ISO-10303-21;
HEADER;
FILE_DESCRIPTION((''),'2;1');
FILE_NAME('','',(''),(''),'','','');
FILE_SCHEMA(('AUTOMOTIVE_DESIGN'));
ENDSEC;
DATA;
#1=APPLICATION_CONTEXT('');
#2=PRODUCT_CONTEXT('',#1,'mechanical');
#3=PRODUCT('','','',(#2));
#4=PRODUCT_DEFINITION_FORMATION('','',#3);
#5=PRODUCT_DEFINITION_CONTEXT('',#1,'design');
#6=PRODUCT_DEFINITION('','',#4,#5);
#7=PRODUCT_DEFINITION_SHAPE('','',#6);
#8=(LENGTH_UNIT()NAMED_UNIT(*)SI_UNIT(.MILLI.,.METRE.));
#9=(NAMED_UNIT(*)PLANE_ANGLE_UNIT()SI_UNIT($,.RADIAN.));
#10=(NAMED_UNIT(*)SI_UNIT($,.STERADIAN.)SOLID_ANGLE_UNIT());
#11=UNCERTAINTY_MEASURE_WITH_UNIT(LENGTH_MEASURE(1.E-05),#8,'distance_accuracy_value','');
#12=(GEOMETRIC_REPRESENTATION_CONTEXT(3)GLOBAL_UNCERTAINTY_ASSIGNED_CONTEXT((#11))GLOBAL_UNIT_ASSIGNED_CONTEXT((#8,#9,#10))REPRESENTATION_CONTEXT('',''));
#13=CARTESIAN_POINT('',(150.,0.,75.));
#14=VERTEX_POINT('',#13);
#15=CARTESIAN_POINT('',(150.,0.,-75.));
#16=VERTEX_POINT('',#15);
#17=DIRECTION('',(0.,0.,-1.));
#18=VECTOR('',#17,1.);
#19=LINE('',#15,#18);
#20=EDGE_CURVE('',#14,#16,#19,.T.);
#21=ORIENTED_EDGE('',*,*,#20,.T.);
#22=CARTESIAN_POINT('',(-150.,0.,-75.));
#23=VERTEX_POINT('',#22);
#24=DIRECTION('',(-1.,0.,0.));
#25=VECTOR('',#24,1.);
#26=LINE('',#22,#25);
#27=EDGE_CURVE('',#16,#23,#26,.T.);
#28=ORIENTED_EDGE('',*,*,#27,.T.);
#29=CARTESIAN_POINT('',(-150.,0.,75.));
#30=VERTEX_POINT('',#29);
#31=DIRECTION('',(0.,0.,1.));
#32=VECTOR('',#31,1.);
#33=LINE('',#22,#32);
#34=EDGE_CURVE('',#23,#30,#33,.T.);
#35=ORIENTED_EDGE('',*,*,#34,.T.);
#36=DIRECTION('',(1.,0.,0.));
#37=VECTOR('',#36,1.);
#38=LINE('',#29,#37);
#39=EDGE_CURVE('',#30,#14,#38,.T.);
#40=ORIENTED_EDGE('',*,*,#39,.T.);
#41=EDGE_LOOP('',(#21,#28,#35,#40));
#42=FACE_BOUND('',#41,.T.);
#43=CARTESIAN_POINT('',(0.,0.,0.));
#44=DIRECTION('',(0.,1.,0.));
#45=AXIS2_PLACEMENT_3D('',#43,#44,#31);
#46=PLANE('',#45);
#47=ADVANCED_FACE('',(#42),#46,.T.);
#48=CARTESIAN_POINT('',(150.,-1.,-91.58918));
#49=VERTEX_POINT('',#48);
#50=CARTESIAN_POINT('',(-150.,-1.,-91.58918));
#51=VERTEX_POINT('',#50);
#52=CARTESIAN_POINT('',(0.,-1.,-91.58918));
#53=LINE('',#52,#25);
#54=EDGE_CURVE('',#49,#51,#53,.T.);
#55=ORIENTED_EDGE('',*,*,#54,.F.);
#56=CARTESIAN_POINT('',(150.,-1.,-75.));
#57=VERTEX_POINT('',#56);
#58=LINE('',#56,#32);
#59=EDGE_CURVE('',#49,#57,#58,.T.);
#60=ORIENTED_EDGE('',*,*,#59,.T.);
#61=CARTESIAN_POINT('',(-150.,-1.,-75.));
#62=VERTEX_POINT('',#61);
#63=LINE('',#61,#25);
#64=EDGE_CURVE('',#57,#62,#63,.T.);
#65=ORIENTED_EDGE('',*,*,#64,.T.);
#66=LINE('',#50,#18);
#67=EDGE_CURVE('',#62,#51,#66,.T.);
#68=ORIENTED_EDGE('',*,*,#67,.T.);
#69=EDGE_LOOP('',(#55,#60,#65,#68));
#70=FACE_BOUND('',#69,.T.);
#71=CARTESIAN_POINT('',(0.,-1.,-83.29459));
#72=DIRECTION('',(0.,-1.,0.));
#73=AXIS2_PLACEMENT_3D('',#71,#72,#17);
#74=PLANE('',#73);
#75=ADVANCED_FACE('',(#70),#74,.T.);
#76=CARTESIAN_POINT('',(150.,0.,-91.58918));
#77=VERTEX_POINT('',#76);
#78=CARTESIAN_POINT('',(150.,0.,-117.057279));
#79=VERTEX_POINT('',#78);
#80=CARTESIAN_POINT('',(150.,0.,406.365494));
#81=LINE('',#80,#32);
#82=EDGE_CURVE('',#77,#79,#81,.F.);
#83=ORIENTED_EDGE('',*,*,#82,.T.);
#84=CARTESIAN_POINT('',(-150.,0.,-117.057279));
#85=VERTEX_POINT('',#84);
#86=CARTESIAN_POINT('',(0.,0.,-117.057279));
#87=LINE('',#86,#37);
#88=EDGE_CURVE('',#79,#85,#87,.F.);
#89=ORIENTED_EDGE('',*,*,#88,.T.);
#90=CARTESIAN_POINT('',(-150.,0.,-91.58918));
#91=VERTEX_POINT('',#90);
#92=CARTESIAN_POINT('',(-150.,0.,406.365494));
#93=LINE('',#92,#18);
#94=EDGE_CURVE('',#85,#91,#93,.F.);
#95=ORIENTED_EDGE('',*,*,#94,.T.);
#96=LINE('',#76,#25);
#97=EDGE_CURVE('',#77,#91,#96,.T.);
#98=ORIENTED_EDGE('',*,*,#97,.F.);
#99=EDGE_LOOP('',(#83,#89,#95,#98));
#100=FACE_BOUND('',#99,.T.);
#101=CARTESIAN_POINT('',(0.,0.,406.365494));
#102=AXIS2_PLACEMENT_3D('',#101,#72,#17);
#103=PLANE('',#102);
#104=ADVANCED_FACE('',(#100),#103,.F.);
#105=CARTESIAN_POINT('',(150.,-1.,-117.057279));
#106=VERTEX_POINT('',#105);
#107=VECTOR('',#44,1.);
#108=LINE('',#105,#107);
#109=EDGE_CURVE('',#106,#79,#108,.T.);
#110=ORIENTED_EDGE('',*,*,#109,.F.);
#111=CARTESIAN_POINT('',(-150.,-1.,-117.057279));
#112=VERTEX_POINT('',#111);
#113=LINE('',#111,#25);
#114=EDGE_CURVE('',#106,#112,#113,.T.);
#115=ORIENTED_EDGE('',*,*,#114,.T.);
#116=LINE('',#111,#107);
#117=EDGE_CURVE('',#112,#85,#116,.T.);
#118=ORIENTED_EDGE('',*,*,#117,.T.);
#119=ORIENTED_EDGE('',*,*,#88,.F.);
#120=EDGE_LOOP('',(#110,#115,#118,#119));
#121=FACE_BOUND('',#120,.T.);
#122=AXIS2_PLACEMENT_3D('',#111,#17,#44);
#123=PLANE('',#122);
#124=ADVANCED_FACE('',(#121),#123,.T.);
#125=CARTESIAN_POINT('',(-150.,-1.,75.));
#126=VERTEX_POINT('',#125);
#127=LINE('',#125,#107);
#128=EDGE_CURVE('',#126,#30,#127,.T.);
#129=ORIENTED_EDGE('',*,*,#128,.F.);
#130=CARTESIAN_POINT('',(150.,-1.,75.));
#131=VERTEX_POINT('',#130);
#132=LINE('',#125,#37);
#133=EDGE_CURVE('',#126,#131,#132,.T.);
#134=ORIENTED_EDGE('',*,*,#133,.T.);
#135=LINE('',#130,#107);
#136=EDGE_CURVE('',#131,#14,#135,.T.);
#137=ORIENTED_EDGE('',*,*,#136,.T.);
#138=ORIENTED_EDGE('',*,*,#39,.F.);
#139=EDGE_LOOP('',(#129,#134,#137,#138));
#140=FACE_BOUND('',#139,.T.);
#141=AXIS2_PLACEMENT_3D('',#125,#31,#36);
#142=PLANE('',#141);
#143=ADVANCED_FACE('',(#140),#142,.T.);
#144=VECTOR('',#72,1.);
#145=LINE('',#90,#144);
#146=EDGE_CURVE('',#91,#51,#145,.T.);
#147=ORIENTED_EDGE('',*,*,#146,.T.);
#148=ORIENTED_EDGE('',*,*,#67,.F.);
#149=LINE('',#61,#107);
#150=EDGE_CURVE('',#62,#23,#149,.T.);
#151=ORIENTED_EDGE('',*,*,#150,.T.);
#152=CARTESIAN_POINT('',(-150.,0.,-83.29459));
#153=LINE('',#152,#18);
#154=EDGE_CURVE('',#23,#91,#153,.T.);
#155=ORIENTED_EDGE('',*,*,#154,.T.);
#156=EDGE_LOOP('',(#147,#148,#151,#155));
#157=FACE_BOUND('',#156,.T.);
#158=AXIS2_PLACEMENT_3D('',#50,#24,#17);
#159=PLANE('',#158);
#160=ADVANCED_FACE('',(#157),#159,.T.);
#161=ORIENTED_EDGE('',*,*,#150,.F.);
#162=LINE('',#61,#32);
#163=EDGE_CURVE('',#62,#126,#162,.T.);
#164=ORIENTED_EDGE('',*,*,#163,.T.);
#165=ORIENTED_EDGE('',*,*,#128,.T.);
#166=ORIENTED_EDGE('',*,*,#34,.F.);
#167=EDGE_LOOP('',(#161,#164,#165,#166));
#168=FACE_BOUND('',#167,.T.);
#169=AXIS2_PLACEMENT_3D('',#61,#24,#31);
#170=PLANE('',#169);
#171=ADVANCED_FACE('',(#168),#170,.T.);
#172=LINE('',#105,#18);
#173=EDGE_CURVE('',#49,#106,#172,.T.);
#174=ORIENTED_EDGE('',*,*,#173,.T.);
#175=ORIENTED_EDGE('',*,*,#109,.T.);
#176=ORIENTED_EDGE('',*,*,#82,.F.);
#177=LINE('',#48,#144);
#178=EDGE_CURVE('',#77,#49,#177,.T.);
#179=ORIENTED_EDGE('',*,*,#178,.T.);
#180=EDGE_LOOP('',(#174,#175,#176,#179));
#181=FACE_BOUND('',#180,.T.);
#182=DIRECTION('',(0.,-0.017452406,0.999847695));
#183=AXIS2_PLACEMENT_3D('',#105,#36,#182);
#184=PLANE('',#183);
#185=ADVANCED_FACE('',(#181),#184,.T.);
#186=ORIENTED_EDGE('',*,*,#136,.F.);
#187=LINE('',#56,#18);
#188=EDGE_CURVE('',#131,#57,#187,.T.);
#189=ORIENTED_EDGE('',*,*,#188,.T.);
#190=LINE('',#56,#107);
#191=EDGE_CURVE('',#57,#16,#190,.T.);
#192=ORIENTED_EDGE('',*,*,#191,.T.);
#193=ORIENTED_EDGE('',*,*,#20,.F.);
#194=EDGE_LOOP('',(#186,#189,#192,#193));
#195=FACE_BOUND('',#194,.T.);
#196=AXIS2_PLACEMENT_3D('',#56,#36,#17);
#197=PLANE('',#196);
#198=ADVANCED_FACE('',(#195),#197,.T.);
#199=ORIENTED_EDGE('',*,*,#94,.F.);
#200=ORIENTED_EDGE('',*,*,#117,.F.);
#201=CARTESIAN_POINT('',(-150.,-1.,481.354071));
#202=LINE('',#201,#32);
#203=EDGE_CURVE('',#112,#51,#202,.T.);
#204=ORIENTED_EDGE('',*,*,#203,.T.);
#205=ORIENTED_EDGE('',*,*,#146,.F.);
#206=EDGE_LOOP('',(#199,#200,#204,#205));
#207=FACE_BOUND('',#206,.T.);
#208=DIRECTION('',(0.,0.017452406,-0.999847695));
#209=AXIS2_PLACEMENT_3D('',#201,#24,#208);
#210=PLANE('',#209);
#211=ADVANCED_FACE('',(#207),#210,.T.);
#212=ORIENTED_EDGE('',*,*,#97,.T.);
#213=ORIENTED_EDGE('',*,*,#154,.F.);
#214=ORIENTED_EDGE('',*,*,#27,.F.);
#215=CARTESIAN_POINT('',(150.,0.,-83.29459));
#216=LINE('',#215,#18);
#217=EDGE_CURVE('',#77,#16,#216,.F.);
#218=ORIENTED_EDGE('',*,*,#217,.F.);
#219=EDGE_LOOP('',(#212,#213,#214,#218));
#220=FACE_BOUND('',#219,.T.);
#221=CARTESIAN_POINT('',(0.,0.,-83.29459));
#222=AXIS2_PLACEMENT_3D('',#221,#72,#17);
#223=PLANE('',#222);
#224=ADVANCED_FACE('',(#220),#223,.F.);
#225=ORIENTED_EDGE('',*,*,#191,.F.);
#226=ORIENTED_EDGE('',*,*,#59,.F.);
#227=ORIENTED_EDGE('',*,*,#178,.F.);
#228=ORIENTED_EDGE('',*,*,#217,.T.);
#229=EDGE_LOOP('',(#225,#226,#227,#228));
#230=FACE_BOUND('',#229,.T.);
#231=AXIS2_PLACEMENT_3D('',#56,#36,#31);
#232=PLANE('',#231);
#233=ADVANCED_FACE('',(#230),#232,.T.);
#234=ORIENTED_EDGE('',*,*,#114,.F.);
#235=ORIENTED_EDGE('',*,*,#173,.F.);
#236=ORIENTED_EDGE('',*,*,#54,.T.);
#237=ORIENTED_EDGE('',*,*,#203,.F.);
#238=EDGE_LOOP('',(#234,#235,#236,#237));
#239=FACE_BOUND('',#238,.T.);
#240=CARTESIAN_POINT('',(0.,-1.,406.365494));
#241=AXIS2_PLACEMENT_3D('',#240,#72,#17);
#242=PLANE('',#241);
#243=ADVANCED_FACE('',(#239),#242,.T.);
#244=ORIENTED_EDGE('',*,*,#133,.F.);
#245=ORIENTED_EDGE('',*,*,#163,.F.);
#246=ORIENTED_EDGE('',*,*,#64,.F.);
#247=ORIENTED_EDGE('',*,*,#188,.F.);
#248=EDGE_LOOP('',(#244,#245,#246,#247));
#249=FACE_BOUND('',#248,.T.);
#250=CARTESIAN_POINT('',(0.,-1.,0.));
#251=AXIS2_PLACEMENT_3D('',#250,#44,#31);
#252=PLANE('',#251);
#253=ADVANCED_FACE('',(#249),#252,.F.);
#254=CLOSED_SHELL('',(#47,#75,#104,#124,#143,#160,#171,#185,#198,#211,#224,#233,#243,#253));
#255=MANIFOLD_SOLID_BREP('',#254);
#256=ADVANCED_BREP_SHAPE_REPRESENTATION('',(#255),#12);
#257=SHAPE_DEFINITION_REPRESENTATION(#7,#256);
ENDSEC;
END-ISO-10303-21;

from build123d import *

# Parameters (mm, degrees)
SKETCH3_W          = 300
SKETCH3_H          = 150
BASE_FLANGE1_DEPTH = 1
EDGE_FLANGE2_DEPTH = 300
UNFOLD1_START      = -150
UNFOLD1_DEPTH      = 300
UNFOLD1_2_DEPTH    = 300


# Read off the part's stored shape, not the designer's step: Unfold1
# Sheet-metal steps are written as plain solids
with BuildPart() as part:
    # Sketch3 → Base-Flange1 (new body)
    with BuildSketch(Plane(origin=(0, 0, 0), x_dir=(1, 0, 0), z_dir=(0, 1, 0))):
        Rectangle(SKETCH3_W, SKETCH3_H)
    extrude(amount=-BASE_FLANGE1_DEPTH)

    # Edge-Flange2 section (across the edge) → Edge-Flange2 (add)
    with BuildSketch(Plane(origin=(150, 0, -647.943250647), x_dir=(0, -0.9998476951563913, 0.017452406437283758), z_dir=(-1, 0, 0))):
        with BuildLine():
            Line((-1, 572.943250647), (-1, 598.411349871))
            Line((-1, 598.411349871), (0, 598.411349871))
            Line((0, 598.411349871), (0, 572.943250647))
            ThreePointArc((0, 572.943250647), (4.956367323, 567.943441031), (9.999238476, 572.855988614))
            Line((9.999238476, 572.855988614), (10.999086171, 572.838536208))
            ThreePointArc((10.999086171, 572.838536208), (4.947640787, 566.943479108), (-1, 572.943250647))
        make_face()
    extrude(amount=EDGE_FLANGE2_DEPTH)

    # Unfold1 outline → Unfold1 (cut)
    with BuildSketch(Plane.YZ.offset(UNFOLD1_START)):
        with BuildLine():
            Line((0, -75), (0, -78.31662479))
            ThreePointArc((0, -78.31662479), (6.681854726, -80.759458714), (10.999086171, -75.104714439))
            Line((10.999086171, -75.104714439), (11.44356579, -49.640494129))
            Line((11.44356579, -49.640494129), (10.443718095, -49.623041723))
            Line((10.443718095, -49.623041723), (9.999238476, -75.087262032))
            ThreePointArc((9.999238476, -75.087262032), (4.956367323, -79.999809615), (0, -75))
        make_face()
    extrude(amount=UNFOLD1_DEPTH, mode=Mode.SUBTRACT)

    # Unfold1 2 outline → Unfold1 2 (add)
    with BuildSketch(Plane.YZ.offset(UNFOLD1_START)):
        with BuildLine():
            Line((-1, -75), (-1, -117.057279231))
            Line((-1, -117.057279231), (0, -117.057279231))
            Line((0, -117.057279231), (0, -78.31662479))
            ThreePointArc((0, -78.31662479), (-0.744562646, -76.732050807), (-1, -75))
        make_face()
    extrude(amount=UNFOLD1_2_DEPTH)


solid = part.part
